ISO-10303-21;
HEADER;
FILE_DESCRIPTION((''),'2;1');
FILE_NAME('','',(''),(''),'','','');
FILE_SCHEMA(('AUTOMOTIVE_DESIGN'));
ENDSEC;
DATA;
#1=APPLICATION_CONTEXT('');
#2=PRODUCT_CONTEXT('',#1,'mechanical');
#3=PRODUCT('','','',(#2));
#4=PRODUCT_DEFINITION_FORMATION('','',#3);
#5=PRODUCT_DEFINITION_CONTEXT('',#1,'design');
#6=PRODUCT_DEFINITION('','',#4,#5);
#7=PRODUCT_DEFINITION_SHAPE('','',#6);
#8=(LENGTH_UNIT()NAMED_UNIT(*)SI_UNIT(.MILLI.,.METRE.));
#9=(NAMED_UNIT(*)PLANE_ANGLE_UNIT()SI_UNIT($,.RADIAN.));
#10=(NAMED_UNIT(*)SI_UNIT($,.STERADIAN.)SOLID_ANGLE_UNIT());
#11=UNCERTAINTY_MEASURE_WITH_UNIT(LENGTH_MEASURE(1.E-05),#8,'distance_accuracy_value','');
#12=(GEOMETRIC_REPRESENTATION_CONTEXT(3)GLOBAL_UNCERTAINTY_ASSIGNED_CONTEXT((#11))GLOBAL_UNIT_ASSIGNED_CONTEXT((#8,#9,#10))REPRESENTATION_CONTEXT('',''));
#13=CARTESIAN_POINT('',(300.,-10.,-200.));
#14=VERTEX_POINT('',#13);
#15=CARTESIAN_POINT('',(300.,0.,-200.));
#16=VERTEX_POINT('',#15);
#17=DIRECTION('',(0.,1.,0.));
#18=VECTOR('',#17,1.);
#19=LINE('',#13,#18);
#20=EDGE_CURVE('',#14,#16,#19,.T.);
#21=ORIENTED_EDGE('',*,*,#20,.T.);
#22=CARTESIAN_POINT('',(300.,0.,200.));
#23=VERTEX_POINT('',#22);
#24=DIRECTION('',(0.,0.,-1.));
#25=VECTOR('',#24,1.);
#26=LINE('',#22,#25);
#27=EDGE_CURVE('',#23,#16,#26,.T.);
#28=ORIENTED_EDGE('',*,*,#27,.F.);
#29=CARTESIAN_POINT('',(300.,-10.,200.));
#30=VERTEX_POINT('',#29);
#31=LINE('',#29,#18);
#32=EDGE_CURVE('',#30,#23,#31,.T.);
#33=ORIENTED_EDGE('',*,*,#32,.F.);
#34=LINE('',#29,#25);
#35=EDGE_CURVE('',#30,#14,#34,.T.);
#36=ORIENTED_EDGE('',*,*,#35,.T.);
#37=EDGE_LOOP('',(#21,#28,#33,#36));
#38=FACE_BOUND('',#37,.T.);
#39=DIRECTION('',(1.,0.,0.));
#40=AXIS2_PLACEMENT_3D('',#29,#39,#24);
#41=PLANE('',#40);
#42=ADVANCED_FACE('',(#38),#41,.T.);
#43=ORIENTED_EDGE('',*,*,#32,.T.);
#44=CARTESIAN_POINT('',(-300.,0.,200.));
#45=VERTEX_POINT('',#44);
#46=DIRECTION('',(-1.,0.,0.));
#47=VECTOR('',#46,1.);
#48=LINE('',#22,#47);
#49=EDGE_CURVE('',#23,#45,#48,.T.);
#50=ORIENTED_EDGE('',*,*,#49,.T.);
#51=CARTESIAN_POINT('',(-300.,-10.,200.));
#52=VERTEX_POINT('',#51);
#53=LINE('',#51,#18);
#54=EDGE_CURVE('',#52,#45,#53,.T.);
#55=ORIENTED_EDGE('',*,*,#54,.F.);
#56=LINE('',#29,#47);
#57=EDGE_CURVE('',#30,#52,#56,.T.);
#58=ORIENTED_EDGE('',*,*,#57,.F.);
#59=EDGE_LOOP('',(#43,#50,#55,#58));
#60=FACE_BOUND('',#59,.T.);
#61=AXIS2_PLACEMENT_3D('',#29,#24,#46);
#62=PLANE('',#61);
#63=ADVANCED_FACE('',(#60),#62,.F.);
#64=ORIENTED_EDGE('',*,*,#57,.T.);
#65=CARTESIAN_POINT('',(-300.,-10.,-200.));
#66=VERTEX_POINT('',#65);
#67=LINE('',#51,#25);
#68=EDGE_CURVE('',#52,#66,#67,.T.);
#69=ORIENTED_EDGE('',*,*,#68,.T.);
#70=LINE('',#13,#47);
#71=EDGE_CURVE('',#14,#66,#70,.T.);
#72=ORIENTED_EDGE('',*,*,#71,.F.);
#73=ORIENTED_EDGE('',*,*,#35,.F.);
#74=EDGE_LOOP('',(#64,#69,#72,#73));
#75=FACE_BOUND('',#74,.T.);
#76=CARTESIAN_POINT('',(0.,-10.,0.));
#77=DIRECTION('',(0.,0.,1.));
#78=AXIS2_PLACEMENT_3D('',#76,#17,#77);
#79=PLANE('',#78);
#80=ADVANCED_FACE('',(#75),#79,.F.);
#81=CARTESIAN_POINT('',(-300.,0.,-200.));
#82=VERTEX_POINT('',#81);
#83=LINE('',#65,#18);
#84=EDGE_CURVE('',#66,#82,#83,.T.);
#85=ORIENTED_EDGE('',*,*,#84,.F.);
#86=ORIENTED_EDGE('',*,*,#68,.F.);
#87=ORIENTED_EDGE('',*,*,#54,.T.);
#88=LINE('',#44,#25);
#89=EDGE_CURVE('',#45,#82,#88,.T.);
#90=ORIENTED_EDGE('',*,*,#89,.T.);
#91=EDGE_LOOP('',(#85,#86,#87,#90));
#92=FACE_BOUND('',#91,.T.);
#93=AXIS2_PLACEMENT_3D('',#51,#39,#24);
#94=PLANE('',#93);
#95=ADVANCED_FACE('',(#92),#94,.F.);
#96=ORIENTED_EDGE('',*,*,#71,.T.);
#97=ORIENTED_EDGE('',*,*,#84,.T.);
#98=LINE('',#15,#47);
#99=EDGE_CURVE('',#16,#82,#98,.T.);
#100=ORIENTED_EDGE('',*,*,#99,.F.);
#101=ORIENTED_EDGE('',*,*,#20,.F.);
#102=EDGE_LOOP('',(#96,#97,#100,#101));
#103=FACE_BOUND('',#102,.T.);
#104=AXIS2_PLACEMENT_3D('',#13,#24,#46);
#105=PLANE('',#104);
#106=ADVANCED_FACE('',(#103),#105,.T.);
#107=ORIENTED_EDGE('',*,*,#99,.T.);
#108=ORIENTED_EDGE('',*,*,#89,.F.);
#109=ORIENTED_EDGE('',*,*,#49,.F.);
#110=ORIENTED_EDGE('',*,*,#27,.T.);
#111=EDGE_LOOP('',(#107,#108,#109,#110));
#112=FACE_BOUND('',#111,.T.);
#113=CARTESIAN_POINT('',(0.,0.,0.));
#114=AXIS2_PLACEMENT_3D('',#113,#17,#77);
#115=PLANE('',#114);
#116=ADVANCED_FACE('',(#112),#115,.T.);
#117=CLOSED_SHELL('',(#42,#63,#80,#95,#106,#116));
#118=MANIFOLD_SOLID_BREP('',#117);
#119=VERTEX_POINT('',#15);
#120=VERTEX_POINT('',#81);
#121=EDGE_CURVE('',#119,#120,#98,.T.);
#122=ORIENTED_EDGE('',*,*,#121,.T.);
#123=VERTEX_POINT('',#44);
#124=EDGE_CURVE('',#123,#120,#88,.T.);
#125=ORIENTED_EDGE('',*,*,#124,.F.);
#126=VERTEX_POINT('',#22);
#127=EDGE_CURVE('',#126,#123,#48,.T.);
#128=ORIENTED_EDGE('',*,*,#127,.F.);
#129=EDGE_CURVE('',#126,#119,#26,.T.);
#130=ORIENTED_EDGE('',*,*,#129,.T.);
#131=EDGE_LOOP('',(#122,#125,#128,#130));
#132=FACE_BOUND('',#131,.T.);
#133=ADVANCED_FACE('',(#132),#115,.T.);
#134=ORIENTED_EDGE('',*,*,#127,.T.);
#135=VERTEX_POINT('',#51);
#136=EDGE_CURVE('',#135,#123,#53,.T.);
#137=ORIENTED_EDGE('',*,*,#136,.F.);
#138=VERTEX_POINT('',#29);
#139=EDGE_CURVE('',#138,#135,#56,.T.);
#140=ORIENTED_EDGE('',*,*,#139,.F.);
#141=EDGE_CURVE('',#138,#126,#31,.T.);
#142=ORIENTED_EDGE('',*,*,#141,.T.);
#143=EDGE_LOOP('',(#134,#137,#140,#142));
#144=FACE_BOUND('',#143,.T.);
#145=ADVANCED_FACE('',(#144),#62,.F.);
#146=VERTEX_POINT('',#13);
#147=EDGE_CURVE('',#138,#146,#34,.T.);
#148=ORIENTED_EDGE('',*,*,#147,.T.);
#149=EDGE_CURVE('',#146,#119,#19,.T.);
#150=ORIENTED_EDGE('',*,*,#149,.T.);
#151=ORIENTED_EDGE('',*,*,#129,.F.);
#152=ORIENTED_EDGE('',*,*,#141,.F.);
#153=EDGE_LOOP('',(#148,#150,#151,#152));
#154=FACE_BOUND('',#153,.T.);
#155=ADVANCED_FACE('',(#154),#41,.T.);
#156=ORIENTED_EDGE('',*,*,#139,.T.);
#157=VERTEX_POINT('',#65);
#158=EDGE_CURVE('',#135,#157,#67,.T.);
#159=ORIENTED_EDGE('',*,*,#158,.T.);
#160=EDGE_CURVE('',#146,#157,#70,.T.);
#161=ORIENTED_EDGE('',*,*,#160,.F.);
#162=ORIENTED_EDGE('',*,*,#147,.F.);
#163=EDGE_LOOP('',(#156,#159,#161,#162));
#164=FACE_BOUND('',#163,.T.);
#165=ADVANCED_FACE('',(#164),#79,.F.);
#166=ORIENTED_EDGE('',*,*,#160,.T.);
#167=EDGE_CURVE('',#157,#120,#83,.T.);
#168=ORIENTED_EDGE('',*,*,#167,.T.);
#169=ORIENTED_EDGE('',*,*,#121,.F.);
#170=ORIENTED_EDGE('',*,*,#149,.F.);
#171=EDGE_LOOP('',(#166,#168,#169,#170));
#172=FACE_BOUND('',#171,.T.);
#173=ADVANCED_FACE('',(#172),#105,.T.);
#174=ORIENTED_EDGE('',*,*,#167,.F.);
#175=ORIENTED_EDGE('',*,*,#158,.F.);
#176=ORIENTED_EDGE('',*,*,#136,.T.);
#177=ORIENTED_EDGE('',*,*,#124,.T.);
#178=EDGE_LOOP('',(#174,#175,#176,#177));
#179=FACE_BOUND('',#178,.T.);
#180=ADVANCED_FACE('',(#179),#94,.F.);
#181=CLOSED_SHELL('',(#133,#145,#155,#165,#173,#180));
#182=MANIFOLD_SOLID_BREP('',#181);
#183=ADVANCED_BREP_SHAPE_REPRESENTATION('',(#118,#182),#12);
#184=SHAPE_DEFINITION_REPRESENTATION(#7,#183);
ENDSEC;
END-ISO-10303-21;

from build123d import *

# Parameters (mm, degrees)
SKETCH1_W                 = 600
SKETCH1_H                 = 400
BOSS_EXTRUDE1_DEPTH       = 10
BODY_MOVE_COPY1_START     = -300
BODY_MOVE_COPY1_OUTLINE_W = 10
BODY_MOVE_COPY1_OUTLINE_H = 400
BODY_MOVE_COPY1_DEPTH     = 600


# Read off the part's stored shape, not the designer's step: Body-Move/Copy1
with BuildPart() as part:
    # Sketch1 → Boss-Extrude1 (new body)
    with BuildSketch(Plane(origin=(0, 0, 0), x_dir=(1, 0, 0), z_dir=(0, 1, 0))):
        Rectangle(SKETCH1_W, SKETCH1_H)
    extrude(amount=-BOSS_EXTRUDE1_DEPTH)


with BuildPart() as body_2:
    # Body-Move/Copy1 outline → Body-Move/Copy1 (new body)
    with BuildSketch(Plane.YZ.offset(BODY_MOVE_COPY1_START)):
        with Locations((-5, 0)):
            Rectangle(BODY_MOVE_COPY1_OUTLINE_W, BODY_MOVE_COPY1_OUTLINE_H)
    extrude(amount=BODY_MOVE_COPY1_DEPTH)


solid = Compound([part.part, body_2.part])
